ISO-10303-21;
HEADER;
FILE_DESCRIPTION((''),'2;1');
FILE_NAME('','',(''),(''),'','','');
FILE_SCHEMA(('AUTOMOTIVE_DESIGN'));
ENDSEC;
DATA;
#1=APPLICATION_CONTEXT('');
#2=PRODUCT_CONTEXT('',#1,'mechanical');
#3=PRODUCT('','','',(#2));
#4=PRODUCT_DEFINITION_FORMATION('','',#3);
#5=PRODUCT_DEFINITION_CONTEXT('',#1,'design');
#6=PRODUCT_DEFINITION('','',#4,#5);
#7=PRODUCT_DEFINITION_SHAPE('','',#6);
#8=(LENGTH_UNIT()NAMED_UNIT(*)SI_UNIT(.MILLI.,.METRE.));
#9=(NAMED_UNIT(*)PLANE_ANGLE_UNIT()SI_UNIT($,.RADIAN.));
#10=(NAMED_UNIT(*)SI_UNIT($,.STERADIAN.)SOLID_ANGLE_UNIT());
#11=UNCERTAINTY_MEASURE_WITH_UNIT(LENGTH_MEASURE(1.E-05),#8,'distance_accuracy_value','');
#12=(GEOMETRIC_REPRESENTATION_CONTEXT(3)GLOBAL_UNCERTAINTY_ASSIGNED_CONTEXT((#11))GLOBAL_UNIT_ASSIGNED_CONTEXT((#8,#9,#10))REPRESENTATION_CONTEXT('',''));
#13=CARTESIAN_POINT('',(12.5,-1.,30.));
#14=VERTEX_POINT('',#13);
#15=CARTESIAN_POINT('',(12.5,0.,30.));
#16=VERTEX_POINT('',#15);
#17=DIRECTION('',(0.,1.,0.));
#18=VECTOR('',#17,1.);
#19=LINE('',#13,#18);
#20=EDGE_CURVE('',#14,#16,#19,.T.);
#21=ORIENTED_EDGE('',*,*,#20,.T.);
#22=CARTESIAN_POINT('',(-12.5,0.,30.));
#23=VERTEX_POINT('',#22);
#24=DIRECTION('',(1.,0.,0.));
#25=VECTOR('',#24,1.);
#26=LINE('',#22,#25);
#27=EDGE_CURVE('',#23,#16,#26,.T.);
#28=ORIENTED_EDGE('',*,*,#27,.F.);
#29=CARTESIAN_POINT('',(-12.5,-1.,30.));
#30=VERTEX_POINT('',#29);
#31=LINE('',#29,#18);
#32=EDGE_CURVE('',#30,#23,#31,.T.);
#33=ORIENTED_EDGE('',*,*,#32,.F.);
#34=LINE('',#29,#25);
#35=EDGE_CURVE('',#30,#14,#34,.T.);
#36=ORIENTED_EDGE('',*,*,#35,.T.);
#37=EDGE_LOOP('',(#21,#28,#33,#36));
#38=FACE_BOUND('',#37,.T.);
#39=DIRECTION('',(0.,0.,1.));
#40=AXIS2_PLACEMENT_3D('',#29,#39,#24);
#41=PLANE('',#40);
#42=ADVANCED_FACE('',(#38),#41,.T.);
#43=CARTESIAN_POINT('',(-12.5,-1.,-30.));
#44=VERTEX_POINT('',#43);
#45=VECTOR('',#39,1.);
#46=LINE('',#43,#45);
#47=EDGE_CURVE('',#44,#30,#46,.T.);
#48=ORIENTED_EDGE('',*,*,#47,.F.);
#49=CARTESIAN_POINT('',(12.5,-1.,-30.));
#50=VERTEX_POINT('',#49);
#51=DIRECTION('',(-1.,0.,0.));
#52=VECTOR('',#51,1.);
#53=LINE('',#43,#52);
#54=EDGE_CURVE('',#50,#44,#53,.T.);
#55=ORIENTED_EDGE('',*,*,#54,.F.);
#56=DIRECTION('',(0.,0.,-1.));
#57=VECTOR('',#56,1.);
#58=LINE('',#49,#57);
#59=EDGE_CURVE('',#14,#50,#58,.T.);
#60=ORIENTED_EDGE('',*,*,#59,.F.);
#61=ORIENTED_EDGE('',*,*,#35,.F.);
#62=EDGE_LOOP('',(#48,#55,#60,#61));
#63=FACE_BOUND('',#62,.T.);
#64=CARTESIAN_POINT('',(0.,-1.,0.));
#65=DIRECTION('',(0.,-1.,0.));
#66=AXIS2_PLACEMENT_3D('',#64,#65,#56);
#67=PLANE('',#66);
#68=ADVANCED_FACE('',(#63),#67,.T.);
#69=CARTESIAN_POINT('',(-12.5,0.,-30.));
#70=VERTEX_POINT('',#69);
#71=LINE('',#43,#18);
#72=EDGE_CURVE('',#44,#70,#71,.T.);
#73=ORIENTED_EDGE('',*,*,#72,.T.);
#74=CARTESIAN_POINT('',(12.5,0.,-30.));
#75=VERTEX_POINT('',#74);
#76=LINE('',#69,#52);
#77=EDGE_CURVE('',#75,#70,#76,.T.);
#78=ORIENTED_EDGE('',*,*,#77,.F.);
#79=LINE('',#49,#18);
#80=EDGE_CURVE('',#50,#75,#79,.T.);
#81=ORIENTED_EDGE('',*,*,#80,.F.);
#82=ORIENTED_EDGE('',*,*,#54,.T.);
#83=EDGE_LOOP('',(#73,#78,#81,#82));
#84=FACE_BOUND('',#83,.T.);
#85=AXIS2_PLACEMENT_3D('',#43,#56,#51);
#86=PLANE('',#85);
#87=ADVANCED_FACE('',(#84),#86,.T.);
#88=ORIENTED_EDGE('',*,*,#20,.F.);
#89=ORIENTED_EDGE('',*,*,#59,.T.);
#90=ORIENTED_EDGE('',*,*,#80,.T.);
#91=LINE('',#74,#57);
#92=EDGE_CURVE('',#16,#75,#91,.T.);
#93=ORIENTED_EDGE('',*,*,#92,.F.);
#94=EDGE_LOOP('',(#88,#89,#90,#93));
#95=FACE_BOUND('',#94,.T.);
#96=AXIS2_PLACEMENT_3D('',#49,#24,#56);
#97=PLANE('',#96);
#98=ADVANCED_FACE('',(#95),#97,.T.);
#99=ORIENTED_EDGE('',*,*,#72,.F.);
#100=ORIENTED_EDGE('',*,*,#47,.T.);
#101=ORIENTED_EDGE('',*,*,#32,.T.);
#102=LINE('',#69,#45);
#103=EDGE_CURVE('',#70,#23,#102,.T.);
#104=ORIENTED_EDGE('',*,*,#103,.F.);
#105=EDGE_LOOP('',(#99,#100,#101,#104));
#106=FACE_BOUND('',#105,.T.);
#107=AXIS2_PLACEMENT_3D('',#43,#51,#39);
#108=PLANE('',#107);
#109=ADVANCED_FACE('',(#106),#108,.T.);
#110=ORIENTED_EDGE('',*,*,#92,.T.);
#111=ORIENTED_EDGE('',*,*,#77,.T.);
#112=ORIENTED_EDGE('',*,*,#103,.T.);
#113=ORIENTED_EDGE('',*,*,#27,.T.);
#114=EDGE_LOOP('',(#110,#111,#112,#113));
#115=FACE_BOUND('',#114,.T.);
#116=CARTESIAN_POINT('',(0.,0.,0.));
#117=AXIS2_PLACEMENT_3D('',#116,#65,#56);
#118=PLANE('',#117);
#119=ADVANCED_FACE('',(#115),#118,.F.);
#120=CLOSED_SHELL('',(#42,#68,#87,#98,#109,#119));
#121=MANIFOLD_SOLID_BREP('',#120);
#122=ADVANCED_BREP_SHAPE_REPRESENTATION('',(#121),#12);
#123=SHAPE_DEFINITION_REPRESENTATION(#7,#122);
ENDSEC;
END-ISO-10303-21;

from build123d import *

# Parameters (mm, degrees)
SKETCH1_W          = 60
SKETCH1_H          = 25
BASE_FLANGE1_DEPTH = 1


# Sheet-metal steps are written as plain solids
with BuildPart() as part:
    # Sketch1 → Base-Flange1 (new body)
    with BuildSketch(Plane.ZX):
        Rectangle(SKETCH1_W, SKETCH1_H)
    extrude(amount=-BASE_FLANGE1_DEPTH)


solid = part.part
